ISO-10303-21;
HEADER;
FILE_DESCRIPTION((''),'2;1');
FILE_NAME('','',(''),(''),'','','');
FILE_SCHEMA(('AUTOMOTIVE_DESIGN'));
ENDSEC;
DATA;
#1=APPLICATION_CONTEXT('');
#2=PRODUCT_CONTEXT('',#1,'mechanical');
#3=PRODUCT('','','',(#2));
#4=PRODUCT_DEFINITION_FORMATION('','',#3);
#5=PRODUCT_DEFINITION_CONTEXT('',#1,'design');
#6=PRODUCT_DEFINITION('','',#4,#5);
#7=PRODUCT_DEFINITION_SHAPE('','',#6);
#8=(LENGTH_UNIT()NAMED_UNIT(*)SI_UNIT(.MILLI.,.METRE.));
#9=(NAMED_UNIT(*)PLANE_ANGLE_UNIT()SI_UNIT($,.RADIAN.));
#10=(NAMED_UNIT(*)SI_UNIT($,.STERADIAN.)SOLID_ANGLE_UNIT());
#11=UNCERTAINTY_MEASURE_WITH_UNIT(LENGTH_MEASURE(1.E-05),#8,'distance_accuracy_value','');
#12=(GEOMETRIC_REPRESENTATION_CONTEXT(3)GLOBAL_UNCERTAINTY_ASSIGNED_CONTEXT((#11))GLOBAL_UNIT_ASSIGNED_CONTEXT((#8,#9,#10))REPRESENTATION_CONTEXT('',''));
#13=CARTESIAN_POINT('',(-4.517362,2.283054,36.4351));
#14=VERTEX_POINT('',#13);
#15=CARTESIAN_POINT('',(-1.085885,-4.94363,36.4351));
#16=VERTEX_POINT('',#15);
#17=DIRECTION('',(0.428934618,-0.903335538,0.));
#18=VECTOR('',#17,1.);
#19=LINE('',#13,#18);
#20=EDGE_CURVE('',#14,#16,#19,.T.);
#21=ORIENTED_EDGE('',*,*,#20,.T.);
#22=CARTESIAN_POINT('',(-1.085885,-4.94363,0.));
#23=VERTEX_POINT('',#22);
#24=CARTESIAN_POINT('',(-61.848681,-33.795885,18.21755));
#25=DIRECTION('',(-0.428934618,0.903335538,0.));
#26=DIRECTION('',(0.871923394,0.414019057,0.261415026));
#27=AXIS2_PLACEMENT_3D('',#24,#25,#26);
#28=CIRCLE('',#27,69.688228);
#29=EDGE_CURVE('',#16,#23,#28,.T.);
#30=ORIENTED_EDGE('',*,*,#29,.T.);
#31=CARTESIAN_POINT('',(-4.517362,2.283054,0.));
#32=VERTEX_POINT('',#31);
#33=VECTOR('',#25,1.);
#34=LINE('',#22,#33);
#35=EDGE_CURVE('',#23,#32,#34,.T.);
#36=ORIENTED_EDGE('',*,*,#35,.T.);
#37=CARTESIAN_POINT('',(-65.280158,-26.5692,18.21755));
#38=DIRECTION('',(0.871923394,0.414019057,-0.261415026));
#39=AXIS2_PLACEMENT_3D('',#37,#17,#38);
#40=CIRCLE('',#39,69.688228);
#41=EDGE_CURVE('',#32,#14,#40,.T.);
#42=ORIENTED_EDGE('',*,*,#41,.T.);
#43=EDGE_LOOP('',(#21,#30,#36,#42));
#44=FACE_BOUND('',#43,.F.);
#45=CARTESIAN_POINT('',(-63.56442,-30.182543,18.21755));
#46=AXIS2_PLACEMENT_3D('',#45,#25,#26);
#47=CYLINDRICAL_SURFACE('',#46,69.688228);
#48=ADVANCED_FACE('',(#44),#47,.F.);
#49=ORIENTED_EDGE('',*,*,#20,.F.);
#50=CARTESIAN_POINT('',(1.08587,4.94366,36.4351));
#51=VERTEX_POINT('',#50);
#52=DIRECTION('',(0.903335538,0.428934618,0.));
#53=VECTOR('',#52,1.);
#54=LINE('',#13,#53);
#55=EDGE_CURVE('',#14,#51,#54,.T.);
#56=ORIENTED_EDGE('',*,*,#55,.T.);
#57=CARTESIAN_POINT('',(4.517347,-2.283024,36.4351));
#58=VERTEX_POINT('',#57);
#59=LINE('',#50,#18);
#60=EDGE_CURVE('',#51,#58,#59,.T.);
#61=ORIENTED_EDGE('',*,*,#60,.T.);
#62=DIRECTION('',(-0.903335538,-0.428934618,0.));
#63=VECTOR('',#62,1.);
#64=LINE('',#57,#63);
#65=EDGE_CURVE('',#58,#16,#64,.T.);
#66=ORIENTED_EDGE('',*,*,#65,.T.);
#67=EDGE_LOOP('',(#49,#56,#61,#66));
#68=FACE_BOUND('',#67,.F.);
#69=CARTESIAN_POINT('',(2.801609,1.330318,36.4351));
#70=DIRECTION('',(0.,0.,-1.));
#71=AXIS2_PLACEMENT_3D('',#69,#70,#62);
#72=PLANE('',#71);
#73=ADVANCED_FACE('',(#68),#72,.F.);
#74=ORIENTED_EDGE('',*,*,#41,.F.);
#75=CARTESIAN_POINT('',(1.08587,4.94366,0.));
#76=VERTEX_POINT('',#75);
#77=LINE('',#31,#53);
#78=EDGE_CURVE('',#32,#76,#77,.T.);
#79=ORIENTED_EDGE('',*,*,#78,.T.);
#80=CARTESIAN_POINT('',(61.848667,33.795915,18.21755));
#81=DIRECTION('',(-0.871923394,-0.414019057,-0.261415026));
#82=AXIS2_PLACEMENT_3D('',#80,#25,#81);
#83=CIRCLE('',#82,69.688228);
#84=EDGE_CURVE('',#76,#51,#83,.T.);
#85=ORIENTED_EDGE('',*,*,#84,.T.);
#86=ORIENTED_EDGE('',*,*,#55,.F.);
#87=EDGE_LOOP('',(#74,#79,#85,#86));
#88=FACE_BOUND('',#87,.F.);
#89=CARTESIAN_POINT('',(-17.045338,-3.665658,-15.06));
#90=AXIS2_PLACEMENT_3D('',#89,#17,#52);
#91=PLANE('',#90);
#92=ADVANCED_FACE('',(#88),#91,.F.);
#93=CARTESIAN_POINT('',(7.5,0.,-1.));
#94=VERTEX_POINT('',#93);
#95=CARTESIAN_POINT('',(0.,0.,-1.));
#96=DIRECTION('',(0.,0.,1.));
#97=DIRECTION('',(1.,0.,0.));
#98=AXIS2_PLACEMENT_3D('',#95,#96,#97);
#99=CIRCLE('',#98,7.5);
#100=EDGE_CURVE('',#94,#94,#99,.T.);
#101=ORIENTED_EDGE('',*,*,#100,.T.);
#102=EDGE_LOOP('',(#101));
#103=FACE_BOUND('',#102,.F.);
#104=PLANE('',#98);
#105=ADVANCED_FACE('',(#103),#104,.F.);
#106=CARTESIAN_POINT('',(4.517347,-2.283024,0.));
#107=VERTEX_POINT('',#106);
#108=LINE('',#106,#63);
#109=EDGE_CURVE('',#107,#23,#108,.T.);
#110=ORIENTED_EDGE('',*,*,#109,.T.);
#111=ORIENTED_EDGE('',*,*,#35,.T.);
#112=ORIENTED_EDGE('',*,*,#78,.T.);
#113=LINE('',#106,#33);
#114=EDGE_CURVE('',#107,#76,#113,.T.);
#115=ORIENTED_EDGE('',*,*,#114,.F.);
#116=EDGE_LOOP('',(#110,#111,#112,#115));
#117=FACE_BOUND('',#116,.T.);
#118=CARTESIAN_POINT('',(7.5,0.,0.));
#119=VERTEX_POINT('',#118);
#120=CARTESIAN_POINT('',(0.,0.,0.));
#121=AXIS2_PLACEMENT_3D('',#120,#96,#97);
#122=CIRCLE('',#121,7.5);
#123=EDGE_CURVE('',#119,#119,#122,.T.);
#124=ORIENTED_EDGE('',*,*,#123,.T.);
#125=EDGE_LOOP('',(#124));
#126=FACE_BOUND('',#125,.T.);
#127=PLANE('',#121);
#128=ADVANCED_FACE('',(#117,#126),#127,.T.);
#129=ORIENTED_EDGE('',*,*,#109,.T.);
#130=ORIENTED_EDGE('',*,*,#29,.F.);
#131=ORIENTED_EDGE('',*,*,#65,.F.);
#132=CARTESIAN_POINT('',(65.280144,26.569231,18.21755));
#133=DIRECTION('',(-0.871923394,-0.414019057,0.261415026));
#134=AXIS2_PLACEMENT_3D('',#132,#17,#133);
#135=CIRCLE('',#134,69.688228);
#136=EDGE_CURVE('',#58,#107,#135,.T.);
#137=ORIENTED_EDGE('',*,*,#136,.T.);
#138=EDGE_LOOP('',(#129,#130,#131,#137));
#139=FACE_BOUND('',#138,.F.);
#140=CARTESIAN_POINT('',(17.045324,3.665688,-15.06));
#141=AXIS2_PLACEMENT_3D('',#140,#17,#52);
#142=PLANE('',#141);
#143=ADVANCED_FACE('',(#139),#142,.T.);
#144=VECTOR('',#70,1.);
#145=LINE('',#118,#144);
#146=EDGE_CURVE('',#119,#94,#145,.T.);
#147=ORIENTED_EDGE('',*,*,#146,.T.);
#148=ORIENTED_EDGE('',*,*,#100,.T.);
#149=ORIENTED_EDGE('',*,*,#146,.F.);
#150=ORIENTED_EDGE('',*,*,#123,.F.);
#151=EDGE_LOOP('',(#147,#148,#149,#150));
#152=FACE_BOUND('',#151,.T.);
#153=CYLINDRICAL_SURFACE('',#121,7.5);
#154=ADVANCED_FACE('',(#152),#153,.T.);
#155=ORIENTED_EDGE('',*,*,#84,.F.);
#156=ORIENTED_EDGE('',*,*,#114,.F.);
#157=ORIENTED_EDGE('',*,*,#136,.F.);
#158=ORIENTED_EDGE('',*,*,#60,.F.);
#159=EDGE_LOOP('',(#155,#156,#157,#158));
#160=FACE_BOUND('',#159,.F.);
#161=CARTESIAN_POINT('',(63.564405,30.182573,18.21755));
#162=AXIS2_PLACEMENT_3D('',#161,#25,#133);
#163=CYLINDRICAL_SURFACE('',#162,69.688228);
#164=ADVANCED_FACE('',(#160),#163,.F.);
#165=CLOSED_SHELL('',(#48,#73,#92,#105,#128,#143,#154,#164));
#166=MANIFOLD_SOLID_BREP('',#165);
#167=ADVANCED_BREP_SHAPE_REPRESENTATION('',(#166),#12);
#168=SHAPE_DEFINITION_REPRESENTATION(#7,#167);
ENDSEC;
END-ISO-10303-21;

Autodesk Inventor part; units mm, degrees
ref_plane "YZ Plane" through (0, 0, 0) normal (1, 0, 0) x (0, 1, 0)
ref_plane "XZ Plane" through (0, 0, 0) normal (0, 1, 0) x (-1, 0, 0)
ref_plane "XY Plane" through (0, 0, 0) normal (0, 0, 1) x (1, 0, 0)
ref_plane "Work Plane3" through (-15.3296, -7.279, -15.06) normal (0.4289346, -0.9033355, 0) x (0.9033355, 0.4289346, 0)
ref_plane "Work Plane1" through (4.8151, 29.7955, -15.06) normal (-0.4289346, 0.9033355, 0) x (-0.9033355, -0.4289346, 0)
ref_plane "Work Plane2" through (-4.6706, -29.7269, -15.06) normal (0.4289346, -0.9033355, 0) x (0.9033355, 0.4289346, 0)
sketch "Sketch1" plane through (-15.3296, -7.279, -15.06) normal (0.4289346, -0.9033355, 0) x (0.9033355, 0.4289346, 0)
  circle A0 centre (16.97, 33.03) radius 7.5 projected
  line L0 (9.47, 15.06) -> (24.47, 15.06) projected
  arc A1 (20.0714, 51.4951) -> (20.0714, 15.06) centre (87.3367, 33.2775) ccw
  line L1 (20.0714, 15.06) -> (20.0714, 51.4951) construction
  line L2 (20.0714, 15.06) -> (56.5065, 15.06) construction
  line L3 (20.0714, 51.4951) -> (16.97, 51.4951)
  line L4 (16.97, 51.4951) -> (16.97, 15.06)
  line L5 (20.0714, 15.06) -> (16.97, 15.06)
  dimension "d0" = 90
extrude "Extrusion1" add sketch "Sketch1" along normal mid plane 8 contours A1 A0 L4 | A0 L4 L3 A1 | A1 L0 L4 A0
ref_plane "Work Plane4" through (0, 0, 0) normal (0, 0, 1) x (1, 0, 0)
sketch "Sketch2" plane through (0, 0, 0) normal (0, 0, 1) x (1, 0, 0)
  circle A0 centre (0, 0) radius 7.5 projected
  point P0 (0, 0)
extrude "Extrusion2" add sketch "Sketch2" against normal blind 1
mirror "Mirror1" about plane through (0, 0, 36.4351) normal (-0.9033355, -0.4289346, 0) of "Extrusion1"
properties part number "00_lightshit_ray1"
